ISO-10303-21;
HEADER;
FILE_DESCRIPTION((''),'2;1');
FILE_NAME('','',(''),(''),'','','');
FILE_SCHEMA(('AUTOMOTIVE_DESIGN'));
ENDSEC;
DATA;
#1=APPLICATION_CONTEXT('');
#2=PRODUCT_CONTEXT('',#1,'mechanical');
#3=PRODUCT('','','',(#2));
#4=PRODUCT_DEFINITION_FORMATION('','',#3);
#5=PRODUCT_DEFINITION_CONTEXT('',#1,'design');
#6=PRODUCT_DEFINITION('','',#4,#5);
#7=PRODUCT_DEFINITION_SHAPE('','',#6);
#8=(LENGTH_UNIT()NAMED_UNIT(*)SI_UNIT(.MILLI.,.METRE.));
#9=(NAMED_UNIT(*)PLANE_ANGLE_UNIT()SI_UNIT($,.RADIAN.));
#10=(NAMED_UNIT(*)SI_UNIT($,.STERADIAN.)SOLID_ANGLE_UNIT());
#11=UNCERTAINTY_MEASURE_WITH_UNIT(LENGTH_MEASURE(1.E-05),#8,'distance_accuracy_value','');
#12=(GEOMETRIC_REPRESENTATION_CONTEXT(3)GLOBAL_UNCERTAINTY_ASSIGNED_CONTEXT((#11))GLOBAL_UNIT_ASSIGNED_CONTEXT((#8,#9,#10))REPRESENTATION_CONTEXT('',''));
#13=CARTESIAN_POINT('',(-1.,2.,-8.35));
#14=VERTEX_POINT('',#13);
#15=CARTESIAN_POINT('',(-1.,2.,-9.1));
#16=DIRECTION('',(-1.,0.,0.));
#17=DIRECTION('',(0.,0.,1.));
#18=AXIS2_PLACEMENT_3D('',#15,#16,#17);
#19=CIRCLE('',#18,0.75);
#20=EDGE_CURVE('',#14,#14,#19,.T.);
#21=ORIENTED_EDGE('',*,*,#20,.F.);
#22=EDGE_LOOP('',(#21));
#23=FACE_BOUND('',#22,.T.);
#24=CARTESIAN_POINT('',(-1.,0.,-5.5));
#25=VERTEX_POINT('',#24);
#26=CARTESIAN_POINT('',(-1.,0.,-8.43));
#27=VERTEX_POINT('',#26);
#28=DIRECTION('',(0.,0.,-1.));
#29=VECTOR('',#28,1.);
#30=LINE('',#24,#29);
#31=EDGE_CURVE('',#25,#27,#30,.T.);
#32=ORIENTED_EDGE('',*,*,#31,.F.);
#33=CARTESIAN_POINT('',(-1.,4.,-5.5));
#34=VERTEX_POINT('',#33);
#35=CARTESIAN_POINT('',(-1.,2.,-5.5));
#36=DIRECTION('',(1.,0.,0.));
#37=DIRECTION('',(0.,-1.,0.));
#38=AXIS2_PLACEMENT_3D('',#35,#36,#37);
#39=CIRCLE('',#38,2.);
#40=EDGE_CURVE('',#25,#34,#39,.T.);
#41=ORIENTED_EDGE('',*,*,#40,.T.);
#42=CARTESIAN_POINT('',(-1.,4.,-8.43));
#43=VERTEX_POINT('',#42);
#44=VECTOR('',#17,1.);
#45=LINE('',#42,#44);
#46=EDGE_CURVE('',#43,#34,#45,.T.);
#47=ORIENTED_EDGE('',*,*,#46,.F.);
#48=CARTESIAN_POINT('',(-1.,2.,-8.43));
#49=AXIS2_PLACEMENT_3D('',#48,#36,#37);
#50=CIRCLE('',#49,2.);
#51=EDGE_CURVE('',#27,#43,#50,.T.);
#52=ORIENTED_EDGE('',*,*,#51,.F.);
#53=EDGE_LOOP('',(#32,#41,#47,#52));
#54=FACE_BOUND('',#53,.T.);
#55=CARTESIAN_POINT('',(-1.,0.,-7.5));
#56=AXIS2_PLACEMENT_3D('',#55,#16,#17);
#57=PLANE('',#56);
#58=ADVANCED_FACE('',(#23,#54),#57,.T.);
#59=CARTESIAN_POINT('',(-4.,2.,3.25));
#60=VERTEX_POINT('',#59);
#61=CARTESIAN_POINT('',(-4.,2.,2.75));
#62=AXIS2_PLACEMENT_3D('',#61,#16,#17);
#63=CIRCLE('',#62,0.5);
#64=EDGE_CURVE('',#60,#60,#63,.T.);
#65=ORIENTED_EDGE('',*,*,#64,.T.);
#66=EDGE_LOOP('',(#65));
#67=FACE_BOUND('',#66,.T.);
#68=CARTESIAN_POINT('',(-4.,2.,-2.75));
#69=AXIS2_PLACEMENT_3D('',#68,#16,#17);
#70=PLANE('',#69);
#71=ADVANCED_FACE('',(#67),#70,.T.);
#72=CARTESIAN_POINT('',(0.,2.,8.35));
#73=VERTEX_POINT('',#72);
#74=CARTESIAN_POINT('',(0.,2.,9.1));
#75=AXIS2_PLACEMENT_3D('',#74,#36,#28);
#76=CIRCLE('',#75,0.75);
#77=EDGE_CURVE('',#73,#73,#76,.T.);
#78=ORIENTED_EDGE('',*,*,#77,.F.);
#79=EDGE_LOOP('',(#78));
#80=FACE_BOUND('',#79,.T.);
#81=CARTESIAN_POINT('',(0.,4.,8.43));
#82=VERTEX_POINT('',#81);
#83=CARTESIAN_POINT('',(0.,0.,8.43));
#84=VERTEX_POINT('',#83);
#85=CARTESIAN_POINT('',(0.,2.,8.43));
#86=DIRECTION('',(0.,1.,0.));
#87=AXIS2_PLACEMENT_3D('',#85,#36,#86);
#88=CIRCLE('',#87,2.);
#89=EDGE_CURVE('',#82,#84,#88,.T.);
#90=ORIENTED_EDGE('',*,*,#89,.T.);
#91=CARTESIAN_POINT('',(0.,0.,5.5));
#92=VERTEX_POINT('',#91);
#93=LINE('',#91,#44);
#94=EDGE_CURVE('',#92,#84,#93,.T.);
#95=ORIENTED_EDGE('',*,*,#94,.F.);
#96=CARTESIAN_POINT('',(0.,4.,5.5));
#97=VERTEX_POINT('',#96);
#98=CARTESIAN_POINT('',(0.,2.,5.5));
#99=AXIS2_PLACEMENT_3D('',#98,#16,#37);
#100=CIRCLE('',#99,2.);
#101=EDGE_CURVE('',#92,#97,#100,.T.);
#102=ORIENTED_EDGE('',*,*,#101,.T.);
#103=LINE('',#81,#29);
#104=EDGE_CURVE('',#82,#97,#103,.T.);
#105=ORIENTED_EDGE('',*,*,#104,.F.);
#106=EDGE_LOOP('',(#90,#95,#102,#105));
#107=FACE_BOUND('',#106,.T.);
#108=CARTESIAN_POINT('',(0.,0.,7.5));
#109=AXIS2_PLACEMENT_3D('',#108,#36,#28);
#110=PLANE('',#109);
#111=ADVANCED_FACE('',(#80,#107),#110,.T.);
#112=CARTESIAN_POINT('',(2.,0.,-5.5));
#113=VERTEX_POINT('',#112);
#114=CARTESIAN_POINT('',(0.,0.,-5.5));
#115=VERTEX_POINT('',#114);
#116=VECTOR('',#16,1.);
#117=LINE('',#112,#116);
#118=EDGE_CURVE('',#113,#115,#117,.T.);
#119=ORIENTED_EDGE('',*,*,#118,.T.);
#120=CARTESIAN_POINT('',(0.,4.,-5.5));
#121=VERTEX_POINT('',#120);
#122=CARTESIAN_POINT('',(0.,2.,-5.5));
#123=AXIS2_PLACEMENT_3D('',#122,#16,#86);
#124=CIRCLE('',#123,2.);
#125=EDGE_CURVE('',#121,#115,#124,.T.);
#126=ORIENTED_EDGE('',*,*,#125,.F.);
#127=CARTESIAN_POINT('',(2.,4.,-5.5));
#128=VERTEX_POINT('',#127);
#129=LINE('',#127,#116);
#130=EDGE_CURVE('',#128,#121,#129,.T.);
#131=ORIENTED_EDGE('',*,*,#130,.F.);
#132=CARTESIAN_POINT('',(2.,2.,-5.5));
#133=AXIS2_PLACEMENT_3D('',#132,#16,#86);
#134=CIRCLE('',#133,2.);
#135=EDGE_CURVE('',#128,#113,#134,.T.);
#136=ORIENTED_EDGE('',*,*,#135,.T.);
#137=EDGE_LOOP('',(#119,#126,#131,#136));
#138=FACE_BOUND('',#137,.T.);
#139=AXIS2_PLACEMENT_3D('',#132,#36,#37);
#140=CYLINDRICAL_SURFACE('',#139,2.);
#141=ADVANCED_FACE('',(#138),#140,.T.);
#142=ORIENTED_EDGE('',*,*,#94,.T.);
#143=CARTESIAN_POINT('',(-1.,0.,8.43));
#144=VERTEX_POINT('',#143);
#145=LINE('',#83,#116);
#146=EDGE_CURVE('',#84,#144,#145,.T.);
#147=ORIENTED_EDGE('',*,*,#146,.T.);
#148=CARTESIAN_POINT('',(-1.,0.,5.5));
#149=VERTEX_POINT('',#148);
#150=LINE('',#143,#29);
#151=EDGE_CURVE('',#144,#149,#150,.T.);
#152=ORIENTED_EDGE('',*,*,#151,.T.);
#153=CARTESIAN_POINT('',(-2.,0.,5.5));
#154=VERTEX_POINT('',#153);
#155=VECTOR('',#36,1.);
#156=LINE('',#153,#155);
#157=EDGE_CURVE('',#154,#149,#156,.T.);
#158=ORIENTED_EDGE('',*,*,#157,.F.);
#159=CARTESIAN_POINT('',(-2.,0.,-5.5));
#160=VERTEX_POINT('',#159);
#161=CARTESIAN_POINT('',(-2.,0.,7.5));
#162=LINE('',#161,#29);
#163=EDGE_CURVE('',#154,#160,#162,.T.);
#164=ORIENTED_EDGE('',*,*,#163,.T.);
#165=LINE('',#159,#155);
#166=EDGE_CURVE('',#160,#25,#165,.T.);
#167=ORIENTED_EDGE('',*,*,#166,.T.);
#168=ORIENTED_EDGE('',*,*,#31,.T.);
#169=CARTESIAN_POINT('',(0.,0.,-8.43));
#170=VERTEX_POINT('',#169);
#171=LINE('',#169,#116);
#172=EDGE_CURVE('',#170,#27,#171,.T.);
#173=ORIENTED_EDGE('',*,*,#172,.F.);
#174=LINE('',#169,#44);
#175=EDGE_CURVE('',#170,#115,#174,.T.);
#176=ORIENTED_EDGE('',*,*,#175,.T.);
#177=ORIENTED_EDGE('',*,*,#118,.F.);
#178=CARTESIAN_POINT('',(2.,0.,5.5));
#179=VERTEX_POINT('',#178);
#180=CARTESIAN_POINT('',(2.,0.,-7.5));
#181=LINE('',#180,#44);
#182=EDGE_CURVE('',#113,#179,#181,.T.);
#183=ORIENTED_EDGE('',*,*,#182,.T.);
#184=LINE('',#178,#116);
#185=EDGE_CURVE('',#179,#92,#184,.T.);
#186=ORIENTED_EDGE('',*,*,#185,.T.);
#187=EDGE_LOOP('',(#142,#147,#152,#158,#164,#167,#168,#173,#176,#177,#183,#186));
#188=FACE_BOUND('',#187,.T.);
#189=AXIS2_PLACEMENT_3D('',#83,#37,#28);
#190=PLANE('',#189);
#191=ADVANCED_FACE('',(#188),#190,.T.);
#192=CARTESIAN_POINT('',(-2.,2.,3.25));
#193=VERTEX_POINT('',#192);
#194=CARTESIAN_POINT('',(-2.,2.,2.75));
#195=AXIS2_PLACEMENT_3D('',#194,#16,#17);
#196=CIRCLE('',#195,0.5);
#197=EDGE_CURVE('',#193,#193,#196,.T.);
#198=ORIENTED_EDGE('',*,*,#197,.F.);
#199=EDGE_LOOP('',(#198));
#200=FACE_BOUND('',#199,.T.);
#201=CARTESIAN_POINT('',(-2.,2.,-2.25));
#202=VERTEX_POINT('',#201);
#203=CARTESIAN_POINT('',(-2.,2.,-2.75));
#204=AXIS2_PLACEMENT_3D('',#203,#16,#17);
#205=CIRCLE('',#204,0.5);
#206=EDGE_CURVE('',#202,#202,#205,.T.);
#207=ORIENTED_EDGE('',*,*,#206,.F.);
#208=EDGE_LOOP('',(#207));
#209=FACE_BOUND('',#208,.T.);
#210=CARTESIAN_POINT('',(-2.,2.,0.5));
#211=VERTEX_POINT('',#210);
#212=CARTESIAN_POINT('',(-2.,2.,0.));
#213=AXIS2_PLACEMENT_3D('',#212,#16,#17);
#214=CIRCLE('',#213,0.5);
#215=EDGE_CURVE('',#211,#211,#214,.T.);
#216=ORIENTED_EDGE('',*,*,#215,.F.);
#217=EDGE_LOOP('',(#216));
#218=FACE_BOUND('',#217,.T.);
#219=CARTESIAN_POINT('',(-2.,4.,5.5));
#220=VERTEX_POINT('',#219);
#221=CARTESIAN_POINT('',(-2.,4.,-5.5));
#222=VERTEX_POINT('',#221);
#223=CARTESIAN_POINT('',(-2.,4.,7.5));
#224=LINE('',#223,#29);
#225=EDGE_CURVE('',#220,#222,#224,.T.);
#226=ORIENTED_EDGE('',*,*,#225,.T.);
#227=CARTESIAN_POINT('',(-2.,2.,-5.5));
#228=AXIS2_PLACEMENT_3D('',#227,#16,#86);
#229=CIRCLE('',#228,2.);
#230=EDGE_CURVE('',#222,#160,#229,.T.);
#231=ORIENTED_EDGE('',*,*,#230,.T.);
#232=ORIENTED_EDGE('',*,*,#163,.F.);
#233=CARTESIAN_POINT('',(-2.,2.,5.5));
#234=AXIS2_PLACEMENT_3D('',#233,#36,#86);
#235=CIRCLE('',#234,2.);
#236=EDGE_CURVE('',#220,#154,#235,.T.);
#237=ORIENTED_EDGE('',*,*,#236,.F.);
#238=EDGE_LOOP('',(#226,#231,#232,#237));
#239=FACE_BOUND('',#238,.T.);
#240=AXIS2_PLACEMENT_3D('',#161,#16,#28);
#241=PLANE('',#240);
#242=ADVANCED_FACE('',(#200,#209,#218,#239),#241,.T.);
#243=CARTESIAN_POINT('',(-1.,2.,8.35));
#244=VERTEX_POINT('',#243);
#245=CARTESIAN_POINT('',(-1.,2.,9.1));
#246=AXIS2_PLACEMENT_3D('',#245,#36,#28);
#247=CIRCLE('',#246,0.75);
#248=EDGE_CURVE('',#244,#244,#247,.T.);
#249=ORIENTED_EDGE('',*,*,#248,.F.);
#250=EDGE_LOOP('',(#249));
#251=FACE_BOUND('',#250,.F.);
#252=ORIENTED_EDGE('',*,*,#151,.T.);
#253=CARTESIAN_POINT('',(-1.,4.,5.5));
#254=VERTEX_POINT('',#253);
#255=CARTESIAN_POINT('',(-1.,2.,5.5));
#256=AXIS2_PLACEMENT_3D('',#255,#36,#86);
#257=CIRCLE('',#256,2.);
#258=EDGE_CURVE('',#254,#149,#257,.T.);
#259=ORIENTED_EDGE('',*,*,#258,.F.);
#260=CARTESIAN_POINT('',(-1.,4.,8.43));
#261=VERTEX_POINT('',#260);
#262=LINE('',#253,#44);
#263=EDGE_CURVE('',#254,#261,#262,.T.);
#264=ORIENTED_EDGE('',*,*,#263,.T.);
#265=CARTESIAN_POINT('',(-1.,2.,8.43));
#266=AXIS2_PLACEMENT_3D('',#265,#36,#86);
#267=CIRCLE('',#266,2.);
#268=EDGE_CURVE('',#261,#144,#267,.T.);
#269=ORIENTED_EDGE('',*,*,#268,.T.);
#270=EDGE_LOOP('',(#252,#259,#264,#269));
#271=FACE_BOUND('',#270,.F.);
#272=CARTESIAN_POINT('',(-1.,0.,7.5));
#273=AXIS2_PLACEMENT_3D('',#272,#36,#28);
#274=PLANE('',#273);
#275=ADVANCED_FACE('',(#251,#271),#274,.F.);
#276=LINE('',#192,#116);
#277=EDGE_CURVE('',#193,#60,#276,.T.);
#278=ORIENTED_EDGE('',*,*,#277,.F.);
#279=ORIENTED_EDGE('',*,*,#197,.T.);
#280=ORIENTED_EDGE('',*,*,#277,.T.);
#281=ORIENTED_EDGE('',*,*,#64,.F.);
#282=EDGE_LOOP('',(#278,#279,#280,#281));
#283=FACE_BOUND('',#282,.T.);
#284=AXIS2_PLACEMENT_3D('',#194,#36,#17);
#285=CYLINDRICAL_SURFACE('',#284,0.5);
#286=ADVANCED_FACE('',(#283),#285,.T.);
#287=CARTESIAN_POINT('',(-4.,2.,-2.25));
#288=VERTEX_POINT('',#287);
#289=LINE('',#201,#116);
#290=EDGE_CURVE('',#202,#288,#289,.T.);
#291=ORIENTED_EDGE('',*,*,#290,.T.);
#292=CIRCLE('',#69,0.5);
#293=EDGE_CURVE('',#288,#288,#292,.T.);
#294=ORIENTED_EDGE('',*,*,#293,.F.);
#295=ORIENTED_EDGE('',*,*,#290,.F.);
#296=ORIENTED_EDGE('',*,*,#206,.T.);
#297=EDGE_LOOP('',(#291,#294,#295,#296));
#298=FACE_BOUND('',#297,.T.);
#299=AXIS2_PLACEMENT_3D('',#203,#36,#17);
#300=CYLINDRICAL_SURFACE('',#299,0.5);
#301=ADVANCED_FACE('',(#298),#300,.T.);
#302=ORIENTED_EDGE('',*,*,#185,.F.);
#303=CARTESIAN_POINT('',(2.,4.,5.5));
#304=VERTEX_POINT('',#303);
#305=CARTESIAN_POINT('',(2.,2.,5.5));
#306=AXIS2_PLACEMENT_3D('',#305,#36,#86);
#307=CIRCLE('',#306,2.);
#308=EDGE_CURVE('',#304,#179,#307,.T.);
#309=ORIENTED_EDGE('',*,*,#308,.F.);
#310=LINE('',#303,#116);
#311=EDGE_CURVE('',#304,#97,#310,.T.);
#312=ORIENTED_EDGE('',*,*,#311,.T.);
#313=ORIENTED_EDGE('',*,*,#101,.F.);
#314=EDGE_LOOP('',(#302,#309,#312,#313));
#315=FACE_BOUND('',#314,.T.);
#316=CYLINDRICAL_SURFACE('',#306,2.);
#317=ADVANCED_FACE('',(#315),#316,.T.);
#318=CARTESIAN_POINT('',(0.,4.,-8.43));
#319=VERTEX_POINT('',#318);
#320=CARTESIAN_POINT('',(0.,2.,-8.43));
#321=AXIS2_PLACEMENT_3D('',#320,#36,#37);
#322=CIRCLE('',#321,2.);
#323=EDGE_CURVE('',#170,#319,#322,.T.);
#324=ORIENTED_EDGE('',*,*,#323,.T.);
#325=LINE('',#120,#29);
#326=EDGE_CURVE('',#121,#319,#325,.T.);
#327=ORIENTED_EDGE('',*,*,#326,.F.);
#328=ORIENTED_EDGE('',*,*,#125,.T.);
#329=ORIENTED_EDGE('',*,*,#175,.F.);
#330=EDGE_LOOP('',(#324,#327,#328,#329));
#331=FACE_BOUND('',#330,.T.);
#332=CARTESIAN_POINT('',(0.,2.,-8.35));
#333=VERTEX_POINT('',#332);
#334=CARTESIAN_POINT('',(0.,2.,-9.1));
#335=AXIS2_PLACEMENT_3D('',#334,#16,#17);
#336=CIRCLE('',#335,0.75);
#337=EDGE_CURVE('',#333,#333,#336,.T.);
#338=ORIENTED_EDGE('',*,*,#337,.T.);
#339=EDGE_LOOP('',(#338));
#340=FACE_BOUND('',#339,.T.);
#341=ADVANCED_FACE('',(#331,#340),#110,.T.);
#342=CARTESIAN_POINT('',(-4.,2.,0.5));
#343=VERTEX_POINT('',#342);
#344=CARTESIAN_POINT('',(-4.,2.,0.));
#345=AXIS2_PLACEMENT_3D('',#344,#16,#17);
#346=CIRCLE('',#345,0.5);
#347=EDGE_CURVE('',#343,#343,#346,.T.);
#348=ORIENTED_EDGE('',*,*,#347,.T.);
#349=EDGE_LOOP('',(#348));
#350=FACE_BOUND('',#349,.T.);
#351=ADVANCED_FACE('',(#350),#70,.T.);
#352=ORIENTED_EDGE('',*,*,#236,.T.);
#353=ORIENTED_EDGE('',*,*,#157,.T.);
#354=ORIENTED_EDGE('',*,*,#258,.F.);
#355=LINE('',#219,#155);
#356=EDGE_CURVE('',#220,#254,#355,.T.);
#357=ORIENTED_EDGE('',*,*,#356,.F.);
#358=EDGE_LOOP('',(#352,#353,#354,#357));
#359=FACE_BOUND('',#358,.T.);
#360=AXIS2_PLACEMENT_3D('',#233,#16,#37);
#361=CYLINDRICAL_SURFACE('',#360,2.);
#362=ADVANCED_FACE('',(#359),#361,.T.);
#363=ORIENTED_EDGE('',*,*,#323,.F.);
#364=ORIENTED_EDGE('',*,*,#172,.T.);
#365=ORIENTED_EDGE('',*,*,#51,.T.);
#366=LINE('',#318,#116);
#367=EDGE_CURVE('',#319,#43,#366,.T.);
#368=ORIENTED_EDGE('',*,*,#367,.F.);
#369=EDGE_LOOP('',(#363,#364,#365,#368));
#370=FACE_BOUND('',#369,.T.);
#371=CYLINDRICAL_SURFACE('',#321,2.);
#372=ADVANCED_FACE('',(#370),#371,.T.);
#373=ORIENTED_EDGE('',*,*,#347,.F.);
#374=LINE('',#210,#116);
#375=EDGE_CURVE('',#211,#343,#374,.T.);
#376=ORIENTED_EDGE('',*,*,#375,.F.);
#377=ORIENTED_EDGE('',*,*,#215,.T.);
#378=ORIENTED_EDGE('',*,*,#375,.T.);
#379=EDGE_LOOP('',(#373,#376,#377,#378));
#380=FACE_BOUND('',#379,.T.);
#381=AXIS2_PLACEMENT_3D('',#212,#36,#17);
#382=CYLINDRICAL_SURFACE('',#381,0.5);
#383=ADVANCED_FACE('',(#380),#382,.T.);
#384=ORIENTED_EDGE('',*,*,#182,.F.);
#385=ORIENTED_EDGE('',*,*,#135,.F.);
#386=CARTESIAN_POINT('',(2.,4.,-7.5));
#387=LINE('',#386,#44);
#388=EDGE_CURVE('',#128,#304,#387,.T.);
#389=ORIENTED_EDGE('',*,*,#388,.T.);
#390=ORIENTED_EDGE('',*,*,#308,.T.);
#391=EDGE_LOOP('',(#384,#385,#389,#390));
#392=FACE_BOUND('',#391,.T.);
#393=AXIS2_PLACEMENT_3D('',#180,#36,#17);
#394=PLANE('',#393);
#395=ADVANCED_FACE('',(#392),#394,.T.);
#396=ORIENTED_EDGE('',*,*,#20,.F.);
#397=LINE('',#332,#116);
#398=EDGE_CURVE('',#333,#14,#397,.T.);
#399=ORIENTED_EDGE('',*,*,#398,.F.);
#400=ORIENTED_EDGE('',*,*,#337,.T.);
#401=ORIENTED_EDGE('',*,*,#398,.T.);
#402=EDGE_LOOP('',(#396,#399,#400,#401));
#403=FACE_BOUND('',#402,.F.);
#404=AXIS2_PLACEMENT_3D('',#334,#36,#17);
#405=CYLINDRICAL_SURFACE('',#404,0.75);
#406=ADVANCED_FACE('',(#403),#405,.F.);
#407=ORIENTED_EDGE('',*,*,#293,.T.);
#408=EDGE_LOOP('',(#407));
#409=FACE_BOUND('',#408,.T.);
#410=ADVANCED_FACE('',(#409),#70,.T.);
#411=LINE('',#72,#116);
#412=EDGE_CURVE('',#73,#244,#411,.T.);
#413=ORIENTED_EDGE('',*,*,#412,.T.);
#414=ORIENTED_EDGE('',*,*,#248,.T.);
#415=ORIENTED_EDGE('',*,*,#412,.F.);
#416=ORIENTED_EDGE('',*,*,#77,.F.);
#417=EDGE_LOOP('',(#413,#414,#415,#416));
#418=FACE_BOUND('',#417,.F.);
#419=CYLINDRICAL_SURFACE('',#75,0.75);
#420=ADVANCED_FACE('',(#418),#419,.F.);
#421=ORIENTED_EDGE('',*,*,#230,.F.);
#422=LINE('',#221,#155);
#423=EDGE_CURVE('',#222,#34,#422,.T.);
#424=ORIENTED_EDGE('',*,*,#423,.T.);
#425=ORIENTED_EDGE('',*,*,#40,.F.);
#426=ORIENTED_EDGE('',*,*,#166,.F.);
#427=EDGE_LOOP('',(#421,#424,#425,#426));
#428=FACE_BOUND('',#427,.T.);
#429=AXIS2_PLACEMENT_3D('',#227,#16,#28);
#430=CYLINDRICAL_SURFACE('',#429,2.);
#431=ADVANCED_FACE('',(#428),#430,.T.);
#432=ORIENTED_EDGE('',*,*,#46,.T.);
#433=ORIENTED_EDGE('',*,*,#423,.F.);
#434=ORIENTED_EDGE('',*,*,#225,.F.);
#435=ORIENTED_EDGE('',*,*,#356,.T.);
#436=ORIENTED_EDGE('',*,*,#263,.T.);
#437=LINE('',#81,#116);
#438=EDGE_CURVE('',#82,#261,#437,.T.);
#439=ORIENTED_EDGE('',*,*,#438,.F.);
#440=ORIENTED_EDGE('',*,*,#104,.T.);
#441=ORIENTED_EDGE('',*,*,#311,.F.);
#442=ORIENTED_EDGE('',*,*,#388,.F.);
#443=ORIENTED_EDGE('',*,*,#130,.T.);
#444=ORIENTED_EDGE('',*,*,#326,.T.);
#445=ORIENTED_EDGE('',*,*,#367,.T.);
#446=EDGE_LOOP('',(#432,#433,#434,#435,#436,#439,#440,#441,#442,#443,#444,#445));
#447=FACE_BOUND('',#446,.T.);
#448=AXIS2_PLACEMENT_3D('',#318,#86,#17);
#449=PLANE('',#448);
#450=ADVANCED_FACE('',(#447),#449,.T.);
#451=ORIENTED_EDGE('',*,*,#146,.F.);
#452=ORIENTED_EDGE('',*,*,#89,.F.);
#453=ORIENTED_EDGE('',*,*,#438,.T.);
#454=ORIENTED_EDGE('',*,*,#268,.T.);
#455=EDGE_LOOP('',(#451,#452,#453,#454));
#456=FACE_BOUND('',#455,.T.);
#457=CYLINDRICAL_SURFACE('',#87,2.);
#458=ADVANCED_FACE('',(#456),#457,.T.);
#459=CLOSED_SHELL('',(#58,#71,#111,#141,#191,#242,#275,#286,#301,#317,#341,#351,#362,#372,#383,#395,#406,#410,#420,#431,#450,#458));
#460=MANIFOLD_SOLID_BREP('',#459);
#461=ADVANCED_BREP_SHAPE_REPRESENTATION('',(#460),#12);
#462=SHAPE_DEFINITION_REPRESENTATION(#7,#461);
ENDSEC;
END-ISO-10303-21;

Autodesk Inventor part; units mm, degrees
ref_plane "YZ Plane" through (0, 0, 0) normal (1, 0, 0) x (0, 1, 0)
ref_plane "XZ Plane" through (0, 0, 0) normal (0, 1, 0) x (-1, 0, 0)
ref_plane "XY Plane" through (0, 0, 0) normal (0, 0, 1) x (1, 0, 0)
sketch "Sketch1" plane through (0, 0, 0) normal (0, 1, 0) x (-1, 0, 0)
  line L0 (-2, 7.5) -> (2, 7.5)
  line L1 (2, 7.5) -> (2, -7.5)
  line L2 (2, -7.5) -> (-2, -7.5)
  line L3 (-2, -7.5) -> (-2, 7.5)
  line L4 (-2, 7.5) -> (2, -7.5) construction
  line L5 (2, 7.5) -> (-2, -7.5) construction
  point P0 (0, 0)
  dimension "d0" = 4
  dimension "d1" = 15
extrude "Extrusion1" add sketch "Sketch1" along normal blind 4
sketch "Sketch2" plane through (2, 0, 7.5) normal (1, 0, 0) x (0, 0, -1)
  line L0 (0, 0) -> (0, 4) projected
  line L1 (0, 2) -> (15, 2) construction
  line L2 (15, 0) -> (15, 4) projected
  line L3 (2, 0) -> (13, 0)
  line L4 (13, 4) -> (2, 4)
  arc A0 (2, 4) -> (2, 0) centre (2, 2) ccw
  arc A1 (13, 0) -> (13, 4) centre (13, 2) ccw
  line L5 (0, 4) -> (15, 4) projected
  line L6 (0, 0) -> (15, 0) projected
  point P0 (7.5, 0)
  point P1 (7.5, 2)
  point P2 (15, 2)
extrude "Extrusion2" cut sketch "Sketch2" against normal blind 2 contours L0 A0 L6 | L0 L5 A0 | A1 L2 L6 | L5 L2 A1
sketch "Sketch3" plane through (-2, 0, -7.5) normal (-1, 0, 0) x (0, 0, 1)
  arc A0 (2, 4) -> (0, 2) centre (2, 2) ccw projected
  line L0 (0, 0) -> (0, 4) projected
  line L1 (0, 4) -> (15, 4) projected
  arc A1 (0, 2) -> (2, 0) centre (2, 2) ccw projected
  arc A2 (2, 4) -> (2, 0) centre (2, 2) ccw projected
  line L2 (13, 4) -> (2, 4) projected
  arc A3 (13, 0) -> (13, 4) centre (13, 2) ccw projected
  line L3 (13, 0) -> (2, 0) projected
  line L4 (15, 0) -> (15, 4) projected
  line L5 (0, 0) -> (15, 0) projected
  point P0 (7.5, 0)
  point P1 (15, 2)
extrude "Extrusion3" cut sketch "Sketch3" against normal blind 1 contours A0 L0 L1 | A1 L5 L0 | L1 L4 A3 | L4 L5 A3
sketch "Sketch4" plane through (-2, 0, -5.5) normal (-1, 0, 0) x (0, 0, 1)
  arc A0 (0, 4) -> (-2, 2) centre (0, 2) ccw projected
  circle A1 centre (0, 2) radius 1.5
  arc A2 (13, 2) -> (11, 4) centre (11, 2) ccw projected
  circle A3 centre (11, 2) radius 1.5
  point P0 (5.5, 0)
  dimension "d8" = 3
  dimension "d9" = 3
mark "Mark1"
sketch "Sketch5" plane through (-2, 0, -5.5) normal (-1, 0, 0) x (0, 0, 1)
  circle A0 centre (2.75, 2) radius 1
  circle A1 centre (0, 2) radius 1.5 projected
  circle A2 centre (11, 2) radius 1.5 projected
  line L0 (0, 4) -> (11, 4) projected
  circle A3 centre (5.5, 2) radius 1
  circle A4 centre (8.25, 2) radius 1
  point P0 (5.5, 0)
  dimension "d10" = 2
  dimension "d11" = 2.75
  dimension "d12" = 11
  dimension "d15" = 2.75
mark "Mark2"
sketch "Sketch6" plane through (-2, 2, -2.75) normal (-1, 0, 0) x (0, 0, 1)
  circle A0 centre (0, 0) radius 1 projected
  circle A1 centre (0, 0) radius 0.5
  circle A2 centre (2.75, 0) radius 1 projected
  circle A3 centre (2.75, 0) radius 0.5
  circle A4 centre (5.5, 0) radius 1 projected
  circle A5 centre (5.5, 0) radius 0.5
  point P0 (2.75, -2)
  dimension "d20" = 1
  dimension "d21" = 1
  dimension "d38" = 1
extrude "Extrusion4" add sketch "Sketch6" along normal blind 2 contours A1 | A3 | A5
sketch "Sketch7" plane through (2, 0, 5.5) normal (1, 0, 0) x (0, 0, -1)
  circle A0 centre (0, 2) radius 1.5 projected
  circle A1 centre (11, 2) radius 1.5 projected
  point P0 (5.5, 0)
mark "Mark3"
sketch "Sketch8" plane through (2, 0, 5.5) normal (1, 0, 0) x (0, 0, -1)
  circle A0 centre (8.25, 2) radius 1 projected
  circle A1 centre (5.5, 2) radius 1 projected
  circle A2 centre (5.5, 2) radius 0.75
  circle A3 centre (8.25, 2) radius 0.75
  circle A4 centre (2.75, 2) radius 1 projected
  circle A5 centre (2.75, 2) radius 0.75
  point P0 (5.5, 0)
  dimension "d24" = 1.5
  dimension "d25" = 1.5
  dimension "d39" = 1.5
mark "Mark4"
sketch "Sketch11" plane through (0, 0, 7.5) normal (1, 0, 0) x (0, 0, -1)
  line L0 (-2.93, 2) -> (17.93, 2) construction
  line L1 (-0.93, 0) -> (15.93, 0)
  line L2 (15.93, 4) -> (-0.93, 4)
  arc A0 (-0.93, 4) -> (-0.93, 0) centre (-0.93, 2) ccw
  arc A1 (15.93, 0) -> (15.93, 4) centre (15.93, 2) ccw
  line L3 (2, 0) -> (13, 0) projected
  point P0 (7.5, 0)
  point P1 (7.5, 2)
  point P2 (7.5, 4)
  point P3 (7.5, 0)
  dimension "d31" = 20.86
extrude "Extrusion7" add sketch "Sketch11" against normal blind 1
sketch "Sketch12" plane through (0, 0, 7.5) normal (1, 0, 0) x (0, 0, -1)
  arc A0 (-0.93, 4) -> (-0.93, 0) centre (-0.93, 2) ccw projected
  circle A1 centre (-1.6, 2) radius 0.75
  circle A2 centre (2, 2) radius 1.5 projected
  point P0 (7.5, 0)
  dimension "d34" = 1.5
  dimension "d35" = 3.6
extrude "Extrusion8" cut sketch "Sketch12" against normal blind 1 contours A1
mirror "Mirror1" about plane through (0, 0, 0) normal (0, 0, 1) of "Extrusion8"
equation "\"d9\" = d8"
equation "\"d11\" = 0.25 * d12"
equation "\"d15\" = d11"
equation "\"d21\" = d20"
equation "\"d38\" = d21"
equation "\"d25\" = d24"
equation "\"d39\" = d24"
properties part number "3_pin_ear_female"
